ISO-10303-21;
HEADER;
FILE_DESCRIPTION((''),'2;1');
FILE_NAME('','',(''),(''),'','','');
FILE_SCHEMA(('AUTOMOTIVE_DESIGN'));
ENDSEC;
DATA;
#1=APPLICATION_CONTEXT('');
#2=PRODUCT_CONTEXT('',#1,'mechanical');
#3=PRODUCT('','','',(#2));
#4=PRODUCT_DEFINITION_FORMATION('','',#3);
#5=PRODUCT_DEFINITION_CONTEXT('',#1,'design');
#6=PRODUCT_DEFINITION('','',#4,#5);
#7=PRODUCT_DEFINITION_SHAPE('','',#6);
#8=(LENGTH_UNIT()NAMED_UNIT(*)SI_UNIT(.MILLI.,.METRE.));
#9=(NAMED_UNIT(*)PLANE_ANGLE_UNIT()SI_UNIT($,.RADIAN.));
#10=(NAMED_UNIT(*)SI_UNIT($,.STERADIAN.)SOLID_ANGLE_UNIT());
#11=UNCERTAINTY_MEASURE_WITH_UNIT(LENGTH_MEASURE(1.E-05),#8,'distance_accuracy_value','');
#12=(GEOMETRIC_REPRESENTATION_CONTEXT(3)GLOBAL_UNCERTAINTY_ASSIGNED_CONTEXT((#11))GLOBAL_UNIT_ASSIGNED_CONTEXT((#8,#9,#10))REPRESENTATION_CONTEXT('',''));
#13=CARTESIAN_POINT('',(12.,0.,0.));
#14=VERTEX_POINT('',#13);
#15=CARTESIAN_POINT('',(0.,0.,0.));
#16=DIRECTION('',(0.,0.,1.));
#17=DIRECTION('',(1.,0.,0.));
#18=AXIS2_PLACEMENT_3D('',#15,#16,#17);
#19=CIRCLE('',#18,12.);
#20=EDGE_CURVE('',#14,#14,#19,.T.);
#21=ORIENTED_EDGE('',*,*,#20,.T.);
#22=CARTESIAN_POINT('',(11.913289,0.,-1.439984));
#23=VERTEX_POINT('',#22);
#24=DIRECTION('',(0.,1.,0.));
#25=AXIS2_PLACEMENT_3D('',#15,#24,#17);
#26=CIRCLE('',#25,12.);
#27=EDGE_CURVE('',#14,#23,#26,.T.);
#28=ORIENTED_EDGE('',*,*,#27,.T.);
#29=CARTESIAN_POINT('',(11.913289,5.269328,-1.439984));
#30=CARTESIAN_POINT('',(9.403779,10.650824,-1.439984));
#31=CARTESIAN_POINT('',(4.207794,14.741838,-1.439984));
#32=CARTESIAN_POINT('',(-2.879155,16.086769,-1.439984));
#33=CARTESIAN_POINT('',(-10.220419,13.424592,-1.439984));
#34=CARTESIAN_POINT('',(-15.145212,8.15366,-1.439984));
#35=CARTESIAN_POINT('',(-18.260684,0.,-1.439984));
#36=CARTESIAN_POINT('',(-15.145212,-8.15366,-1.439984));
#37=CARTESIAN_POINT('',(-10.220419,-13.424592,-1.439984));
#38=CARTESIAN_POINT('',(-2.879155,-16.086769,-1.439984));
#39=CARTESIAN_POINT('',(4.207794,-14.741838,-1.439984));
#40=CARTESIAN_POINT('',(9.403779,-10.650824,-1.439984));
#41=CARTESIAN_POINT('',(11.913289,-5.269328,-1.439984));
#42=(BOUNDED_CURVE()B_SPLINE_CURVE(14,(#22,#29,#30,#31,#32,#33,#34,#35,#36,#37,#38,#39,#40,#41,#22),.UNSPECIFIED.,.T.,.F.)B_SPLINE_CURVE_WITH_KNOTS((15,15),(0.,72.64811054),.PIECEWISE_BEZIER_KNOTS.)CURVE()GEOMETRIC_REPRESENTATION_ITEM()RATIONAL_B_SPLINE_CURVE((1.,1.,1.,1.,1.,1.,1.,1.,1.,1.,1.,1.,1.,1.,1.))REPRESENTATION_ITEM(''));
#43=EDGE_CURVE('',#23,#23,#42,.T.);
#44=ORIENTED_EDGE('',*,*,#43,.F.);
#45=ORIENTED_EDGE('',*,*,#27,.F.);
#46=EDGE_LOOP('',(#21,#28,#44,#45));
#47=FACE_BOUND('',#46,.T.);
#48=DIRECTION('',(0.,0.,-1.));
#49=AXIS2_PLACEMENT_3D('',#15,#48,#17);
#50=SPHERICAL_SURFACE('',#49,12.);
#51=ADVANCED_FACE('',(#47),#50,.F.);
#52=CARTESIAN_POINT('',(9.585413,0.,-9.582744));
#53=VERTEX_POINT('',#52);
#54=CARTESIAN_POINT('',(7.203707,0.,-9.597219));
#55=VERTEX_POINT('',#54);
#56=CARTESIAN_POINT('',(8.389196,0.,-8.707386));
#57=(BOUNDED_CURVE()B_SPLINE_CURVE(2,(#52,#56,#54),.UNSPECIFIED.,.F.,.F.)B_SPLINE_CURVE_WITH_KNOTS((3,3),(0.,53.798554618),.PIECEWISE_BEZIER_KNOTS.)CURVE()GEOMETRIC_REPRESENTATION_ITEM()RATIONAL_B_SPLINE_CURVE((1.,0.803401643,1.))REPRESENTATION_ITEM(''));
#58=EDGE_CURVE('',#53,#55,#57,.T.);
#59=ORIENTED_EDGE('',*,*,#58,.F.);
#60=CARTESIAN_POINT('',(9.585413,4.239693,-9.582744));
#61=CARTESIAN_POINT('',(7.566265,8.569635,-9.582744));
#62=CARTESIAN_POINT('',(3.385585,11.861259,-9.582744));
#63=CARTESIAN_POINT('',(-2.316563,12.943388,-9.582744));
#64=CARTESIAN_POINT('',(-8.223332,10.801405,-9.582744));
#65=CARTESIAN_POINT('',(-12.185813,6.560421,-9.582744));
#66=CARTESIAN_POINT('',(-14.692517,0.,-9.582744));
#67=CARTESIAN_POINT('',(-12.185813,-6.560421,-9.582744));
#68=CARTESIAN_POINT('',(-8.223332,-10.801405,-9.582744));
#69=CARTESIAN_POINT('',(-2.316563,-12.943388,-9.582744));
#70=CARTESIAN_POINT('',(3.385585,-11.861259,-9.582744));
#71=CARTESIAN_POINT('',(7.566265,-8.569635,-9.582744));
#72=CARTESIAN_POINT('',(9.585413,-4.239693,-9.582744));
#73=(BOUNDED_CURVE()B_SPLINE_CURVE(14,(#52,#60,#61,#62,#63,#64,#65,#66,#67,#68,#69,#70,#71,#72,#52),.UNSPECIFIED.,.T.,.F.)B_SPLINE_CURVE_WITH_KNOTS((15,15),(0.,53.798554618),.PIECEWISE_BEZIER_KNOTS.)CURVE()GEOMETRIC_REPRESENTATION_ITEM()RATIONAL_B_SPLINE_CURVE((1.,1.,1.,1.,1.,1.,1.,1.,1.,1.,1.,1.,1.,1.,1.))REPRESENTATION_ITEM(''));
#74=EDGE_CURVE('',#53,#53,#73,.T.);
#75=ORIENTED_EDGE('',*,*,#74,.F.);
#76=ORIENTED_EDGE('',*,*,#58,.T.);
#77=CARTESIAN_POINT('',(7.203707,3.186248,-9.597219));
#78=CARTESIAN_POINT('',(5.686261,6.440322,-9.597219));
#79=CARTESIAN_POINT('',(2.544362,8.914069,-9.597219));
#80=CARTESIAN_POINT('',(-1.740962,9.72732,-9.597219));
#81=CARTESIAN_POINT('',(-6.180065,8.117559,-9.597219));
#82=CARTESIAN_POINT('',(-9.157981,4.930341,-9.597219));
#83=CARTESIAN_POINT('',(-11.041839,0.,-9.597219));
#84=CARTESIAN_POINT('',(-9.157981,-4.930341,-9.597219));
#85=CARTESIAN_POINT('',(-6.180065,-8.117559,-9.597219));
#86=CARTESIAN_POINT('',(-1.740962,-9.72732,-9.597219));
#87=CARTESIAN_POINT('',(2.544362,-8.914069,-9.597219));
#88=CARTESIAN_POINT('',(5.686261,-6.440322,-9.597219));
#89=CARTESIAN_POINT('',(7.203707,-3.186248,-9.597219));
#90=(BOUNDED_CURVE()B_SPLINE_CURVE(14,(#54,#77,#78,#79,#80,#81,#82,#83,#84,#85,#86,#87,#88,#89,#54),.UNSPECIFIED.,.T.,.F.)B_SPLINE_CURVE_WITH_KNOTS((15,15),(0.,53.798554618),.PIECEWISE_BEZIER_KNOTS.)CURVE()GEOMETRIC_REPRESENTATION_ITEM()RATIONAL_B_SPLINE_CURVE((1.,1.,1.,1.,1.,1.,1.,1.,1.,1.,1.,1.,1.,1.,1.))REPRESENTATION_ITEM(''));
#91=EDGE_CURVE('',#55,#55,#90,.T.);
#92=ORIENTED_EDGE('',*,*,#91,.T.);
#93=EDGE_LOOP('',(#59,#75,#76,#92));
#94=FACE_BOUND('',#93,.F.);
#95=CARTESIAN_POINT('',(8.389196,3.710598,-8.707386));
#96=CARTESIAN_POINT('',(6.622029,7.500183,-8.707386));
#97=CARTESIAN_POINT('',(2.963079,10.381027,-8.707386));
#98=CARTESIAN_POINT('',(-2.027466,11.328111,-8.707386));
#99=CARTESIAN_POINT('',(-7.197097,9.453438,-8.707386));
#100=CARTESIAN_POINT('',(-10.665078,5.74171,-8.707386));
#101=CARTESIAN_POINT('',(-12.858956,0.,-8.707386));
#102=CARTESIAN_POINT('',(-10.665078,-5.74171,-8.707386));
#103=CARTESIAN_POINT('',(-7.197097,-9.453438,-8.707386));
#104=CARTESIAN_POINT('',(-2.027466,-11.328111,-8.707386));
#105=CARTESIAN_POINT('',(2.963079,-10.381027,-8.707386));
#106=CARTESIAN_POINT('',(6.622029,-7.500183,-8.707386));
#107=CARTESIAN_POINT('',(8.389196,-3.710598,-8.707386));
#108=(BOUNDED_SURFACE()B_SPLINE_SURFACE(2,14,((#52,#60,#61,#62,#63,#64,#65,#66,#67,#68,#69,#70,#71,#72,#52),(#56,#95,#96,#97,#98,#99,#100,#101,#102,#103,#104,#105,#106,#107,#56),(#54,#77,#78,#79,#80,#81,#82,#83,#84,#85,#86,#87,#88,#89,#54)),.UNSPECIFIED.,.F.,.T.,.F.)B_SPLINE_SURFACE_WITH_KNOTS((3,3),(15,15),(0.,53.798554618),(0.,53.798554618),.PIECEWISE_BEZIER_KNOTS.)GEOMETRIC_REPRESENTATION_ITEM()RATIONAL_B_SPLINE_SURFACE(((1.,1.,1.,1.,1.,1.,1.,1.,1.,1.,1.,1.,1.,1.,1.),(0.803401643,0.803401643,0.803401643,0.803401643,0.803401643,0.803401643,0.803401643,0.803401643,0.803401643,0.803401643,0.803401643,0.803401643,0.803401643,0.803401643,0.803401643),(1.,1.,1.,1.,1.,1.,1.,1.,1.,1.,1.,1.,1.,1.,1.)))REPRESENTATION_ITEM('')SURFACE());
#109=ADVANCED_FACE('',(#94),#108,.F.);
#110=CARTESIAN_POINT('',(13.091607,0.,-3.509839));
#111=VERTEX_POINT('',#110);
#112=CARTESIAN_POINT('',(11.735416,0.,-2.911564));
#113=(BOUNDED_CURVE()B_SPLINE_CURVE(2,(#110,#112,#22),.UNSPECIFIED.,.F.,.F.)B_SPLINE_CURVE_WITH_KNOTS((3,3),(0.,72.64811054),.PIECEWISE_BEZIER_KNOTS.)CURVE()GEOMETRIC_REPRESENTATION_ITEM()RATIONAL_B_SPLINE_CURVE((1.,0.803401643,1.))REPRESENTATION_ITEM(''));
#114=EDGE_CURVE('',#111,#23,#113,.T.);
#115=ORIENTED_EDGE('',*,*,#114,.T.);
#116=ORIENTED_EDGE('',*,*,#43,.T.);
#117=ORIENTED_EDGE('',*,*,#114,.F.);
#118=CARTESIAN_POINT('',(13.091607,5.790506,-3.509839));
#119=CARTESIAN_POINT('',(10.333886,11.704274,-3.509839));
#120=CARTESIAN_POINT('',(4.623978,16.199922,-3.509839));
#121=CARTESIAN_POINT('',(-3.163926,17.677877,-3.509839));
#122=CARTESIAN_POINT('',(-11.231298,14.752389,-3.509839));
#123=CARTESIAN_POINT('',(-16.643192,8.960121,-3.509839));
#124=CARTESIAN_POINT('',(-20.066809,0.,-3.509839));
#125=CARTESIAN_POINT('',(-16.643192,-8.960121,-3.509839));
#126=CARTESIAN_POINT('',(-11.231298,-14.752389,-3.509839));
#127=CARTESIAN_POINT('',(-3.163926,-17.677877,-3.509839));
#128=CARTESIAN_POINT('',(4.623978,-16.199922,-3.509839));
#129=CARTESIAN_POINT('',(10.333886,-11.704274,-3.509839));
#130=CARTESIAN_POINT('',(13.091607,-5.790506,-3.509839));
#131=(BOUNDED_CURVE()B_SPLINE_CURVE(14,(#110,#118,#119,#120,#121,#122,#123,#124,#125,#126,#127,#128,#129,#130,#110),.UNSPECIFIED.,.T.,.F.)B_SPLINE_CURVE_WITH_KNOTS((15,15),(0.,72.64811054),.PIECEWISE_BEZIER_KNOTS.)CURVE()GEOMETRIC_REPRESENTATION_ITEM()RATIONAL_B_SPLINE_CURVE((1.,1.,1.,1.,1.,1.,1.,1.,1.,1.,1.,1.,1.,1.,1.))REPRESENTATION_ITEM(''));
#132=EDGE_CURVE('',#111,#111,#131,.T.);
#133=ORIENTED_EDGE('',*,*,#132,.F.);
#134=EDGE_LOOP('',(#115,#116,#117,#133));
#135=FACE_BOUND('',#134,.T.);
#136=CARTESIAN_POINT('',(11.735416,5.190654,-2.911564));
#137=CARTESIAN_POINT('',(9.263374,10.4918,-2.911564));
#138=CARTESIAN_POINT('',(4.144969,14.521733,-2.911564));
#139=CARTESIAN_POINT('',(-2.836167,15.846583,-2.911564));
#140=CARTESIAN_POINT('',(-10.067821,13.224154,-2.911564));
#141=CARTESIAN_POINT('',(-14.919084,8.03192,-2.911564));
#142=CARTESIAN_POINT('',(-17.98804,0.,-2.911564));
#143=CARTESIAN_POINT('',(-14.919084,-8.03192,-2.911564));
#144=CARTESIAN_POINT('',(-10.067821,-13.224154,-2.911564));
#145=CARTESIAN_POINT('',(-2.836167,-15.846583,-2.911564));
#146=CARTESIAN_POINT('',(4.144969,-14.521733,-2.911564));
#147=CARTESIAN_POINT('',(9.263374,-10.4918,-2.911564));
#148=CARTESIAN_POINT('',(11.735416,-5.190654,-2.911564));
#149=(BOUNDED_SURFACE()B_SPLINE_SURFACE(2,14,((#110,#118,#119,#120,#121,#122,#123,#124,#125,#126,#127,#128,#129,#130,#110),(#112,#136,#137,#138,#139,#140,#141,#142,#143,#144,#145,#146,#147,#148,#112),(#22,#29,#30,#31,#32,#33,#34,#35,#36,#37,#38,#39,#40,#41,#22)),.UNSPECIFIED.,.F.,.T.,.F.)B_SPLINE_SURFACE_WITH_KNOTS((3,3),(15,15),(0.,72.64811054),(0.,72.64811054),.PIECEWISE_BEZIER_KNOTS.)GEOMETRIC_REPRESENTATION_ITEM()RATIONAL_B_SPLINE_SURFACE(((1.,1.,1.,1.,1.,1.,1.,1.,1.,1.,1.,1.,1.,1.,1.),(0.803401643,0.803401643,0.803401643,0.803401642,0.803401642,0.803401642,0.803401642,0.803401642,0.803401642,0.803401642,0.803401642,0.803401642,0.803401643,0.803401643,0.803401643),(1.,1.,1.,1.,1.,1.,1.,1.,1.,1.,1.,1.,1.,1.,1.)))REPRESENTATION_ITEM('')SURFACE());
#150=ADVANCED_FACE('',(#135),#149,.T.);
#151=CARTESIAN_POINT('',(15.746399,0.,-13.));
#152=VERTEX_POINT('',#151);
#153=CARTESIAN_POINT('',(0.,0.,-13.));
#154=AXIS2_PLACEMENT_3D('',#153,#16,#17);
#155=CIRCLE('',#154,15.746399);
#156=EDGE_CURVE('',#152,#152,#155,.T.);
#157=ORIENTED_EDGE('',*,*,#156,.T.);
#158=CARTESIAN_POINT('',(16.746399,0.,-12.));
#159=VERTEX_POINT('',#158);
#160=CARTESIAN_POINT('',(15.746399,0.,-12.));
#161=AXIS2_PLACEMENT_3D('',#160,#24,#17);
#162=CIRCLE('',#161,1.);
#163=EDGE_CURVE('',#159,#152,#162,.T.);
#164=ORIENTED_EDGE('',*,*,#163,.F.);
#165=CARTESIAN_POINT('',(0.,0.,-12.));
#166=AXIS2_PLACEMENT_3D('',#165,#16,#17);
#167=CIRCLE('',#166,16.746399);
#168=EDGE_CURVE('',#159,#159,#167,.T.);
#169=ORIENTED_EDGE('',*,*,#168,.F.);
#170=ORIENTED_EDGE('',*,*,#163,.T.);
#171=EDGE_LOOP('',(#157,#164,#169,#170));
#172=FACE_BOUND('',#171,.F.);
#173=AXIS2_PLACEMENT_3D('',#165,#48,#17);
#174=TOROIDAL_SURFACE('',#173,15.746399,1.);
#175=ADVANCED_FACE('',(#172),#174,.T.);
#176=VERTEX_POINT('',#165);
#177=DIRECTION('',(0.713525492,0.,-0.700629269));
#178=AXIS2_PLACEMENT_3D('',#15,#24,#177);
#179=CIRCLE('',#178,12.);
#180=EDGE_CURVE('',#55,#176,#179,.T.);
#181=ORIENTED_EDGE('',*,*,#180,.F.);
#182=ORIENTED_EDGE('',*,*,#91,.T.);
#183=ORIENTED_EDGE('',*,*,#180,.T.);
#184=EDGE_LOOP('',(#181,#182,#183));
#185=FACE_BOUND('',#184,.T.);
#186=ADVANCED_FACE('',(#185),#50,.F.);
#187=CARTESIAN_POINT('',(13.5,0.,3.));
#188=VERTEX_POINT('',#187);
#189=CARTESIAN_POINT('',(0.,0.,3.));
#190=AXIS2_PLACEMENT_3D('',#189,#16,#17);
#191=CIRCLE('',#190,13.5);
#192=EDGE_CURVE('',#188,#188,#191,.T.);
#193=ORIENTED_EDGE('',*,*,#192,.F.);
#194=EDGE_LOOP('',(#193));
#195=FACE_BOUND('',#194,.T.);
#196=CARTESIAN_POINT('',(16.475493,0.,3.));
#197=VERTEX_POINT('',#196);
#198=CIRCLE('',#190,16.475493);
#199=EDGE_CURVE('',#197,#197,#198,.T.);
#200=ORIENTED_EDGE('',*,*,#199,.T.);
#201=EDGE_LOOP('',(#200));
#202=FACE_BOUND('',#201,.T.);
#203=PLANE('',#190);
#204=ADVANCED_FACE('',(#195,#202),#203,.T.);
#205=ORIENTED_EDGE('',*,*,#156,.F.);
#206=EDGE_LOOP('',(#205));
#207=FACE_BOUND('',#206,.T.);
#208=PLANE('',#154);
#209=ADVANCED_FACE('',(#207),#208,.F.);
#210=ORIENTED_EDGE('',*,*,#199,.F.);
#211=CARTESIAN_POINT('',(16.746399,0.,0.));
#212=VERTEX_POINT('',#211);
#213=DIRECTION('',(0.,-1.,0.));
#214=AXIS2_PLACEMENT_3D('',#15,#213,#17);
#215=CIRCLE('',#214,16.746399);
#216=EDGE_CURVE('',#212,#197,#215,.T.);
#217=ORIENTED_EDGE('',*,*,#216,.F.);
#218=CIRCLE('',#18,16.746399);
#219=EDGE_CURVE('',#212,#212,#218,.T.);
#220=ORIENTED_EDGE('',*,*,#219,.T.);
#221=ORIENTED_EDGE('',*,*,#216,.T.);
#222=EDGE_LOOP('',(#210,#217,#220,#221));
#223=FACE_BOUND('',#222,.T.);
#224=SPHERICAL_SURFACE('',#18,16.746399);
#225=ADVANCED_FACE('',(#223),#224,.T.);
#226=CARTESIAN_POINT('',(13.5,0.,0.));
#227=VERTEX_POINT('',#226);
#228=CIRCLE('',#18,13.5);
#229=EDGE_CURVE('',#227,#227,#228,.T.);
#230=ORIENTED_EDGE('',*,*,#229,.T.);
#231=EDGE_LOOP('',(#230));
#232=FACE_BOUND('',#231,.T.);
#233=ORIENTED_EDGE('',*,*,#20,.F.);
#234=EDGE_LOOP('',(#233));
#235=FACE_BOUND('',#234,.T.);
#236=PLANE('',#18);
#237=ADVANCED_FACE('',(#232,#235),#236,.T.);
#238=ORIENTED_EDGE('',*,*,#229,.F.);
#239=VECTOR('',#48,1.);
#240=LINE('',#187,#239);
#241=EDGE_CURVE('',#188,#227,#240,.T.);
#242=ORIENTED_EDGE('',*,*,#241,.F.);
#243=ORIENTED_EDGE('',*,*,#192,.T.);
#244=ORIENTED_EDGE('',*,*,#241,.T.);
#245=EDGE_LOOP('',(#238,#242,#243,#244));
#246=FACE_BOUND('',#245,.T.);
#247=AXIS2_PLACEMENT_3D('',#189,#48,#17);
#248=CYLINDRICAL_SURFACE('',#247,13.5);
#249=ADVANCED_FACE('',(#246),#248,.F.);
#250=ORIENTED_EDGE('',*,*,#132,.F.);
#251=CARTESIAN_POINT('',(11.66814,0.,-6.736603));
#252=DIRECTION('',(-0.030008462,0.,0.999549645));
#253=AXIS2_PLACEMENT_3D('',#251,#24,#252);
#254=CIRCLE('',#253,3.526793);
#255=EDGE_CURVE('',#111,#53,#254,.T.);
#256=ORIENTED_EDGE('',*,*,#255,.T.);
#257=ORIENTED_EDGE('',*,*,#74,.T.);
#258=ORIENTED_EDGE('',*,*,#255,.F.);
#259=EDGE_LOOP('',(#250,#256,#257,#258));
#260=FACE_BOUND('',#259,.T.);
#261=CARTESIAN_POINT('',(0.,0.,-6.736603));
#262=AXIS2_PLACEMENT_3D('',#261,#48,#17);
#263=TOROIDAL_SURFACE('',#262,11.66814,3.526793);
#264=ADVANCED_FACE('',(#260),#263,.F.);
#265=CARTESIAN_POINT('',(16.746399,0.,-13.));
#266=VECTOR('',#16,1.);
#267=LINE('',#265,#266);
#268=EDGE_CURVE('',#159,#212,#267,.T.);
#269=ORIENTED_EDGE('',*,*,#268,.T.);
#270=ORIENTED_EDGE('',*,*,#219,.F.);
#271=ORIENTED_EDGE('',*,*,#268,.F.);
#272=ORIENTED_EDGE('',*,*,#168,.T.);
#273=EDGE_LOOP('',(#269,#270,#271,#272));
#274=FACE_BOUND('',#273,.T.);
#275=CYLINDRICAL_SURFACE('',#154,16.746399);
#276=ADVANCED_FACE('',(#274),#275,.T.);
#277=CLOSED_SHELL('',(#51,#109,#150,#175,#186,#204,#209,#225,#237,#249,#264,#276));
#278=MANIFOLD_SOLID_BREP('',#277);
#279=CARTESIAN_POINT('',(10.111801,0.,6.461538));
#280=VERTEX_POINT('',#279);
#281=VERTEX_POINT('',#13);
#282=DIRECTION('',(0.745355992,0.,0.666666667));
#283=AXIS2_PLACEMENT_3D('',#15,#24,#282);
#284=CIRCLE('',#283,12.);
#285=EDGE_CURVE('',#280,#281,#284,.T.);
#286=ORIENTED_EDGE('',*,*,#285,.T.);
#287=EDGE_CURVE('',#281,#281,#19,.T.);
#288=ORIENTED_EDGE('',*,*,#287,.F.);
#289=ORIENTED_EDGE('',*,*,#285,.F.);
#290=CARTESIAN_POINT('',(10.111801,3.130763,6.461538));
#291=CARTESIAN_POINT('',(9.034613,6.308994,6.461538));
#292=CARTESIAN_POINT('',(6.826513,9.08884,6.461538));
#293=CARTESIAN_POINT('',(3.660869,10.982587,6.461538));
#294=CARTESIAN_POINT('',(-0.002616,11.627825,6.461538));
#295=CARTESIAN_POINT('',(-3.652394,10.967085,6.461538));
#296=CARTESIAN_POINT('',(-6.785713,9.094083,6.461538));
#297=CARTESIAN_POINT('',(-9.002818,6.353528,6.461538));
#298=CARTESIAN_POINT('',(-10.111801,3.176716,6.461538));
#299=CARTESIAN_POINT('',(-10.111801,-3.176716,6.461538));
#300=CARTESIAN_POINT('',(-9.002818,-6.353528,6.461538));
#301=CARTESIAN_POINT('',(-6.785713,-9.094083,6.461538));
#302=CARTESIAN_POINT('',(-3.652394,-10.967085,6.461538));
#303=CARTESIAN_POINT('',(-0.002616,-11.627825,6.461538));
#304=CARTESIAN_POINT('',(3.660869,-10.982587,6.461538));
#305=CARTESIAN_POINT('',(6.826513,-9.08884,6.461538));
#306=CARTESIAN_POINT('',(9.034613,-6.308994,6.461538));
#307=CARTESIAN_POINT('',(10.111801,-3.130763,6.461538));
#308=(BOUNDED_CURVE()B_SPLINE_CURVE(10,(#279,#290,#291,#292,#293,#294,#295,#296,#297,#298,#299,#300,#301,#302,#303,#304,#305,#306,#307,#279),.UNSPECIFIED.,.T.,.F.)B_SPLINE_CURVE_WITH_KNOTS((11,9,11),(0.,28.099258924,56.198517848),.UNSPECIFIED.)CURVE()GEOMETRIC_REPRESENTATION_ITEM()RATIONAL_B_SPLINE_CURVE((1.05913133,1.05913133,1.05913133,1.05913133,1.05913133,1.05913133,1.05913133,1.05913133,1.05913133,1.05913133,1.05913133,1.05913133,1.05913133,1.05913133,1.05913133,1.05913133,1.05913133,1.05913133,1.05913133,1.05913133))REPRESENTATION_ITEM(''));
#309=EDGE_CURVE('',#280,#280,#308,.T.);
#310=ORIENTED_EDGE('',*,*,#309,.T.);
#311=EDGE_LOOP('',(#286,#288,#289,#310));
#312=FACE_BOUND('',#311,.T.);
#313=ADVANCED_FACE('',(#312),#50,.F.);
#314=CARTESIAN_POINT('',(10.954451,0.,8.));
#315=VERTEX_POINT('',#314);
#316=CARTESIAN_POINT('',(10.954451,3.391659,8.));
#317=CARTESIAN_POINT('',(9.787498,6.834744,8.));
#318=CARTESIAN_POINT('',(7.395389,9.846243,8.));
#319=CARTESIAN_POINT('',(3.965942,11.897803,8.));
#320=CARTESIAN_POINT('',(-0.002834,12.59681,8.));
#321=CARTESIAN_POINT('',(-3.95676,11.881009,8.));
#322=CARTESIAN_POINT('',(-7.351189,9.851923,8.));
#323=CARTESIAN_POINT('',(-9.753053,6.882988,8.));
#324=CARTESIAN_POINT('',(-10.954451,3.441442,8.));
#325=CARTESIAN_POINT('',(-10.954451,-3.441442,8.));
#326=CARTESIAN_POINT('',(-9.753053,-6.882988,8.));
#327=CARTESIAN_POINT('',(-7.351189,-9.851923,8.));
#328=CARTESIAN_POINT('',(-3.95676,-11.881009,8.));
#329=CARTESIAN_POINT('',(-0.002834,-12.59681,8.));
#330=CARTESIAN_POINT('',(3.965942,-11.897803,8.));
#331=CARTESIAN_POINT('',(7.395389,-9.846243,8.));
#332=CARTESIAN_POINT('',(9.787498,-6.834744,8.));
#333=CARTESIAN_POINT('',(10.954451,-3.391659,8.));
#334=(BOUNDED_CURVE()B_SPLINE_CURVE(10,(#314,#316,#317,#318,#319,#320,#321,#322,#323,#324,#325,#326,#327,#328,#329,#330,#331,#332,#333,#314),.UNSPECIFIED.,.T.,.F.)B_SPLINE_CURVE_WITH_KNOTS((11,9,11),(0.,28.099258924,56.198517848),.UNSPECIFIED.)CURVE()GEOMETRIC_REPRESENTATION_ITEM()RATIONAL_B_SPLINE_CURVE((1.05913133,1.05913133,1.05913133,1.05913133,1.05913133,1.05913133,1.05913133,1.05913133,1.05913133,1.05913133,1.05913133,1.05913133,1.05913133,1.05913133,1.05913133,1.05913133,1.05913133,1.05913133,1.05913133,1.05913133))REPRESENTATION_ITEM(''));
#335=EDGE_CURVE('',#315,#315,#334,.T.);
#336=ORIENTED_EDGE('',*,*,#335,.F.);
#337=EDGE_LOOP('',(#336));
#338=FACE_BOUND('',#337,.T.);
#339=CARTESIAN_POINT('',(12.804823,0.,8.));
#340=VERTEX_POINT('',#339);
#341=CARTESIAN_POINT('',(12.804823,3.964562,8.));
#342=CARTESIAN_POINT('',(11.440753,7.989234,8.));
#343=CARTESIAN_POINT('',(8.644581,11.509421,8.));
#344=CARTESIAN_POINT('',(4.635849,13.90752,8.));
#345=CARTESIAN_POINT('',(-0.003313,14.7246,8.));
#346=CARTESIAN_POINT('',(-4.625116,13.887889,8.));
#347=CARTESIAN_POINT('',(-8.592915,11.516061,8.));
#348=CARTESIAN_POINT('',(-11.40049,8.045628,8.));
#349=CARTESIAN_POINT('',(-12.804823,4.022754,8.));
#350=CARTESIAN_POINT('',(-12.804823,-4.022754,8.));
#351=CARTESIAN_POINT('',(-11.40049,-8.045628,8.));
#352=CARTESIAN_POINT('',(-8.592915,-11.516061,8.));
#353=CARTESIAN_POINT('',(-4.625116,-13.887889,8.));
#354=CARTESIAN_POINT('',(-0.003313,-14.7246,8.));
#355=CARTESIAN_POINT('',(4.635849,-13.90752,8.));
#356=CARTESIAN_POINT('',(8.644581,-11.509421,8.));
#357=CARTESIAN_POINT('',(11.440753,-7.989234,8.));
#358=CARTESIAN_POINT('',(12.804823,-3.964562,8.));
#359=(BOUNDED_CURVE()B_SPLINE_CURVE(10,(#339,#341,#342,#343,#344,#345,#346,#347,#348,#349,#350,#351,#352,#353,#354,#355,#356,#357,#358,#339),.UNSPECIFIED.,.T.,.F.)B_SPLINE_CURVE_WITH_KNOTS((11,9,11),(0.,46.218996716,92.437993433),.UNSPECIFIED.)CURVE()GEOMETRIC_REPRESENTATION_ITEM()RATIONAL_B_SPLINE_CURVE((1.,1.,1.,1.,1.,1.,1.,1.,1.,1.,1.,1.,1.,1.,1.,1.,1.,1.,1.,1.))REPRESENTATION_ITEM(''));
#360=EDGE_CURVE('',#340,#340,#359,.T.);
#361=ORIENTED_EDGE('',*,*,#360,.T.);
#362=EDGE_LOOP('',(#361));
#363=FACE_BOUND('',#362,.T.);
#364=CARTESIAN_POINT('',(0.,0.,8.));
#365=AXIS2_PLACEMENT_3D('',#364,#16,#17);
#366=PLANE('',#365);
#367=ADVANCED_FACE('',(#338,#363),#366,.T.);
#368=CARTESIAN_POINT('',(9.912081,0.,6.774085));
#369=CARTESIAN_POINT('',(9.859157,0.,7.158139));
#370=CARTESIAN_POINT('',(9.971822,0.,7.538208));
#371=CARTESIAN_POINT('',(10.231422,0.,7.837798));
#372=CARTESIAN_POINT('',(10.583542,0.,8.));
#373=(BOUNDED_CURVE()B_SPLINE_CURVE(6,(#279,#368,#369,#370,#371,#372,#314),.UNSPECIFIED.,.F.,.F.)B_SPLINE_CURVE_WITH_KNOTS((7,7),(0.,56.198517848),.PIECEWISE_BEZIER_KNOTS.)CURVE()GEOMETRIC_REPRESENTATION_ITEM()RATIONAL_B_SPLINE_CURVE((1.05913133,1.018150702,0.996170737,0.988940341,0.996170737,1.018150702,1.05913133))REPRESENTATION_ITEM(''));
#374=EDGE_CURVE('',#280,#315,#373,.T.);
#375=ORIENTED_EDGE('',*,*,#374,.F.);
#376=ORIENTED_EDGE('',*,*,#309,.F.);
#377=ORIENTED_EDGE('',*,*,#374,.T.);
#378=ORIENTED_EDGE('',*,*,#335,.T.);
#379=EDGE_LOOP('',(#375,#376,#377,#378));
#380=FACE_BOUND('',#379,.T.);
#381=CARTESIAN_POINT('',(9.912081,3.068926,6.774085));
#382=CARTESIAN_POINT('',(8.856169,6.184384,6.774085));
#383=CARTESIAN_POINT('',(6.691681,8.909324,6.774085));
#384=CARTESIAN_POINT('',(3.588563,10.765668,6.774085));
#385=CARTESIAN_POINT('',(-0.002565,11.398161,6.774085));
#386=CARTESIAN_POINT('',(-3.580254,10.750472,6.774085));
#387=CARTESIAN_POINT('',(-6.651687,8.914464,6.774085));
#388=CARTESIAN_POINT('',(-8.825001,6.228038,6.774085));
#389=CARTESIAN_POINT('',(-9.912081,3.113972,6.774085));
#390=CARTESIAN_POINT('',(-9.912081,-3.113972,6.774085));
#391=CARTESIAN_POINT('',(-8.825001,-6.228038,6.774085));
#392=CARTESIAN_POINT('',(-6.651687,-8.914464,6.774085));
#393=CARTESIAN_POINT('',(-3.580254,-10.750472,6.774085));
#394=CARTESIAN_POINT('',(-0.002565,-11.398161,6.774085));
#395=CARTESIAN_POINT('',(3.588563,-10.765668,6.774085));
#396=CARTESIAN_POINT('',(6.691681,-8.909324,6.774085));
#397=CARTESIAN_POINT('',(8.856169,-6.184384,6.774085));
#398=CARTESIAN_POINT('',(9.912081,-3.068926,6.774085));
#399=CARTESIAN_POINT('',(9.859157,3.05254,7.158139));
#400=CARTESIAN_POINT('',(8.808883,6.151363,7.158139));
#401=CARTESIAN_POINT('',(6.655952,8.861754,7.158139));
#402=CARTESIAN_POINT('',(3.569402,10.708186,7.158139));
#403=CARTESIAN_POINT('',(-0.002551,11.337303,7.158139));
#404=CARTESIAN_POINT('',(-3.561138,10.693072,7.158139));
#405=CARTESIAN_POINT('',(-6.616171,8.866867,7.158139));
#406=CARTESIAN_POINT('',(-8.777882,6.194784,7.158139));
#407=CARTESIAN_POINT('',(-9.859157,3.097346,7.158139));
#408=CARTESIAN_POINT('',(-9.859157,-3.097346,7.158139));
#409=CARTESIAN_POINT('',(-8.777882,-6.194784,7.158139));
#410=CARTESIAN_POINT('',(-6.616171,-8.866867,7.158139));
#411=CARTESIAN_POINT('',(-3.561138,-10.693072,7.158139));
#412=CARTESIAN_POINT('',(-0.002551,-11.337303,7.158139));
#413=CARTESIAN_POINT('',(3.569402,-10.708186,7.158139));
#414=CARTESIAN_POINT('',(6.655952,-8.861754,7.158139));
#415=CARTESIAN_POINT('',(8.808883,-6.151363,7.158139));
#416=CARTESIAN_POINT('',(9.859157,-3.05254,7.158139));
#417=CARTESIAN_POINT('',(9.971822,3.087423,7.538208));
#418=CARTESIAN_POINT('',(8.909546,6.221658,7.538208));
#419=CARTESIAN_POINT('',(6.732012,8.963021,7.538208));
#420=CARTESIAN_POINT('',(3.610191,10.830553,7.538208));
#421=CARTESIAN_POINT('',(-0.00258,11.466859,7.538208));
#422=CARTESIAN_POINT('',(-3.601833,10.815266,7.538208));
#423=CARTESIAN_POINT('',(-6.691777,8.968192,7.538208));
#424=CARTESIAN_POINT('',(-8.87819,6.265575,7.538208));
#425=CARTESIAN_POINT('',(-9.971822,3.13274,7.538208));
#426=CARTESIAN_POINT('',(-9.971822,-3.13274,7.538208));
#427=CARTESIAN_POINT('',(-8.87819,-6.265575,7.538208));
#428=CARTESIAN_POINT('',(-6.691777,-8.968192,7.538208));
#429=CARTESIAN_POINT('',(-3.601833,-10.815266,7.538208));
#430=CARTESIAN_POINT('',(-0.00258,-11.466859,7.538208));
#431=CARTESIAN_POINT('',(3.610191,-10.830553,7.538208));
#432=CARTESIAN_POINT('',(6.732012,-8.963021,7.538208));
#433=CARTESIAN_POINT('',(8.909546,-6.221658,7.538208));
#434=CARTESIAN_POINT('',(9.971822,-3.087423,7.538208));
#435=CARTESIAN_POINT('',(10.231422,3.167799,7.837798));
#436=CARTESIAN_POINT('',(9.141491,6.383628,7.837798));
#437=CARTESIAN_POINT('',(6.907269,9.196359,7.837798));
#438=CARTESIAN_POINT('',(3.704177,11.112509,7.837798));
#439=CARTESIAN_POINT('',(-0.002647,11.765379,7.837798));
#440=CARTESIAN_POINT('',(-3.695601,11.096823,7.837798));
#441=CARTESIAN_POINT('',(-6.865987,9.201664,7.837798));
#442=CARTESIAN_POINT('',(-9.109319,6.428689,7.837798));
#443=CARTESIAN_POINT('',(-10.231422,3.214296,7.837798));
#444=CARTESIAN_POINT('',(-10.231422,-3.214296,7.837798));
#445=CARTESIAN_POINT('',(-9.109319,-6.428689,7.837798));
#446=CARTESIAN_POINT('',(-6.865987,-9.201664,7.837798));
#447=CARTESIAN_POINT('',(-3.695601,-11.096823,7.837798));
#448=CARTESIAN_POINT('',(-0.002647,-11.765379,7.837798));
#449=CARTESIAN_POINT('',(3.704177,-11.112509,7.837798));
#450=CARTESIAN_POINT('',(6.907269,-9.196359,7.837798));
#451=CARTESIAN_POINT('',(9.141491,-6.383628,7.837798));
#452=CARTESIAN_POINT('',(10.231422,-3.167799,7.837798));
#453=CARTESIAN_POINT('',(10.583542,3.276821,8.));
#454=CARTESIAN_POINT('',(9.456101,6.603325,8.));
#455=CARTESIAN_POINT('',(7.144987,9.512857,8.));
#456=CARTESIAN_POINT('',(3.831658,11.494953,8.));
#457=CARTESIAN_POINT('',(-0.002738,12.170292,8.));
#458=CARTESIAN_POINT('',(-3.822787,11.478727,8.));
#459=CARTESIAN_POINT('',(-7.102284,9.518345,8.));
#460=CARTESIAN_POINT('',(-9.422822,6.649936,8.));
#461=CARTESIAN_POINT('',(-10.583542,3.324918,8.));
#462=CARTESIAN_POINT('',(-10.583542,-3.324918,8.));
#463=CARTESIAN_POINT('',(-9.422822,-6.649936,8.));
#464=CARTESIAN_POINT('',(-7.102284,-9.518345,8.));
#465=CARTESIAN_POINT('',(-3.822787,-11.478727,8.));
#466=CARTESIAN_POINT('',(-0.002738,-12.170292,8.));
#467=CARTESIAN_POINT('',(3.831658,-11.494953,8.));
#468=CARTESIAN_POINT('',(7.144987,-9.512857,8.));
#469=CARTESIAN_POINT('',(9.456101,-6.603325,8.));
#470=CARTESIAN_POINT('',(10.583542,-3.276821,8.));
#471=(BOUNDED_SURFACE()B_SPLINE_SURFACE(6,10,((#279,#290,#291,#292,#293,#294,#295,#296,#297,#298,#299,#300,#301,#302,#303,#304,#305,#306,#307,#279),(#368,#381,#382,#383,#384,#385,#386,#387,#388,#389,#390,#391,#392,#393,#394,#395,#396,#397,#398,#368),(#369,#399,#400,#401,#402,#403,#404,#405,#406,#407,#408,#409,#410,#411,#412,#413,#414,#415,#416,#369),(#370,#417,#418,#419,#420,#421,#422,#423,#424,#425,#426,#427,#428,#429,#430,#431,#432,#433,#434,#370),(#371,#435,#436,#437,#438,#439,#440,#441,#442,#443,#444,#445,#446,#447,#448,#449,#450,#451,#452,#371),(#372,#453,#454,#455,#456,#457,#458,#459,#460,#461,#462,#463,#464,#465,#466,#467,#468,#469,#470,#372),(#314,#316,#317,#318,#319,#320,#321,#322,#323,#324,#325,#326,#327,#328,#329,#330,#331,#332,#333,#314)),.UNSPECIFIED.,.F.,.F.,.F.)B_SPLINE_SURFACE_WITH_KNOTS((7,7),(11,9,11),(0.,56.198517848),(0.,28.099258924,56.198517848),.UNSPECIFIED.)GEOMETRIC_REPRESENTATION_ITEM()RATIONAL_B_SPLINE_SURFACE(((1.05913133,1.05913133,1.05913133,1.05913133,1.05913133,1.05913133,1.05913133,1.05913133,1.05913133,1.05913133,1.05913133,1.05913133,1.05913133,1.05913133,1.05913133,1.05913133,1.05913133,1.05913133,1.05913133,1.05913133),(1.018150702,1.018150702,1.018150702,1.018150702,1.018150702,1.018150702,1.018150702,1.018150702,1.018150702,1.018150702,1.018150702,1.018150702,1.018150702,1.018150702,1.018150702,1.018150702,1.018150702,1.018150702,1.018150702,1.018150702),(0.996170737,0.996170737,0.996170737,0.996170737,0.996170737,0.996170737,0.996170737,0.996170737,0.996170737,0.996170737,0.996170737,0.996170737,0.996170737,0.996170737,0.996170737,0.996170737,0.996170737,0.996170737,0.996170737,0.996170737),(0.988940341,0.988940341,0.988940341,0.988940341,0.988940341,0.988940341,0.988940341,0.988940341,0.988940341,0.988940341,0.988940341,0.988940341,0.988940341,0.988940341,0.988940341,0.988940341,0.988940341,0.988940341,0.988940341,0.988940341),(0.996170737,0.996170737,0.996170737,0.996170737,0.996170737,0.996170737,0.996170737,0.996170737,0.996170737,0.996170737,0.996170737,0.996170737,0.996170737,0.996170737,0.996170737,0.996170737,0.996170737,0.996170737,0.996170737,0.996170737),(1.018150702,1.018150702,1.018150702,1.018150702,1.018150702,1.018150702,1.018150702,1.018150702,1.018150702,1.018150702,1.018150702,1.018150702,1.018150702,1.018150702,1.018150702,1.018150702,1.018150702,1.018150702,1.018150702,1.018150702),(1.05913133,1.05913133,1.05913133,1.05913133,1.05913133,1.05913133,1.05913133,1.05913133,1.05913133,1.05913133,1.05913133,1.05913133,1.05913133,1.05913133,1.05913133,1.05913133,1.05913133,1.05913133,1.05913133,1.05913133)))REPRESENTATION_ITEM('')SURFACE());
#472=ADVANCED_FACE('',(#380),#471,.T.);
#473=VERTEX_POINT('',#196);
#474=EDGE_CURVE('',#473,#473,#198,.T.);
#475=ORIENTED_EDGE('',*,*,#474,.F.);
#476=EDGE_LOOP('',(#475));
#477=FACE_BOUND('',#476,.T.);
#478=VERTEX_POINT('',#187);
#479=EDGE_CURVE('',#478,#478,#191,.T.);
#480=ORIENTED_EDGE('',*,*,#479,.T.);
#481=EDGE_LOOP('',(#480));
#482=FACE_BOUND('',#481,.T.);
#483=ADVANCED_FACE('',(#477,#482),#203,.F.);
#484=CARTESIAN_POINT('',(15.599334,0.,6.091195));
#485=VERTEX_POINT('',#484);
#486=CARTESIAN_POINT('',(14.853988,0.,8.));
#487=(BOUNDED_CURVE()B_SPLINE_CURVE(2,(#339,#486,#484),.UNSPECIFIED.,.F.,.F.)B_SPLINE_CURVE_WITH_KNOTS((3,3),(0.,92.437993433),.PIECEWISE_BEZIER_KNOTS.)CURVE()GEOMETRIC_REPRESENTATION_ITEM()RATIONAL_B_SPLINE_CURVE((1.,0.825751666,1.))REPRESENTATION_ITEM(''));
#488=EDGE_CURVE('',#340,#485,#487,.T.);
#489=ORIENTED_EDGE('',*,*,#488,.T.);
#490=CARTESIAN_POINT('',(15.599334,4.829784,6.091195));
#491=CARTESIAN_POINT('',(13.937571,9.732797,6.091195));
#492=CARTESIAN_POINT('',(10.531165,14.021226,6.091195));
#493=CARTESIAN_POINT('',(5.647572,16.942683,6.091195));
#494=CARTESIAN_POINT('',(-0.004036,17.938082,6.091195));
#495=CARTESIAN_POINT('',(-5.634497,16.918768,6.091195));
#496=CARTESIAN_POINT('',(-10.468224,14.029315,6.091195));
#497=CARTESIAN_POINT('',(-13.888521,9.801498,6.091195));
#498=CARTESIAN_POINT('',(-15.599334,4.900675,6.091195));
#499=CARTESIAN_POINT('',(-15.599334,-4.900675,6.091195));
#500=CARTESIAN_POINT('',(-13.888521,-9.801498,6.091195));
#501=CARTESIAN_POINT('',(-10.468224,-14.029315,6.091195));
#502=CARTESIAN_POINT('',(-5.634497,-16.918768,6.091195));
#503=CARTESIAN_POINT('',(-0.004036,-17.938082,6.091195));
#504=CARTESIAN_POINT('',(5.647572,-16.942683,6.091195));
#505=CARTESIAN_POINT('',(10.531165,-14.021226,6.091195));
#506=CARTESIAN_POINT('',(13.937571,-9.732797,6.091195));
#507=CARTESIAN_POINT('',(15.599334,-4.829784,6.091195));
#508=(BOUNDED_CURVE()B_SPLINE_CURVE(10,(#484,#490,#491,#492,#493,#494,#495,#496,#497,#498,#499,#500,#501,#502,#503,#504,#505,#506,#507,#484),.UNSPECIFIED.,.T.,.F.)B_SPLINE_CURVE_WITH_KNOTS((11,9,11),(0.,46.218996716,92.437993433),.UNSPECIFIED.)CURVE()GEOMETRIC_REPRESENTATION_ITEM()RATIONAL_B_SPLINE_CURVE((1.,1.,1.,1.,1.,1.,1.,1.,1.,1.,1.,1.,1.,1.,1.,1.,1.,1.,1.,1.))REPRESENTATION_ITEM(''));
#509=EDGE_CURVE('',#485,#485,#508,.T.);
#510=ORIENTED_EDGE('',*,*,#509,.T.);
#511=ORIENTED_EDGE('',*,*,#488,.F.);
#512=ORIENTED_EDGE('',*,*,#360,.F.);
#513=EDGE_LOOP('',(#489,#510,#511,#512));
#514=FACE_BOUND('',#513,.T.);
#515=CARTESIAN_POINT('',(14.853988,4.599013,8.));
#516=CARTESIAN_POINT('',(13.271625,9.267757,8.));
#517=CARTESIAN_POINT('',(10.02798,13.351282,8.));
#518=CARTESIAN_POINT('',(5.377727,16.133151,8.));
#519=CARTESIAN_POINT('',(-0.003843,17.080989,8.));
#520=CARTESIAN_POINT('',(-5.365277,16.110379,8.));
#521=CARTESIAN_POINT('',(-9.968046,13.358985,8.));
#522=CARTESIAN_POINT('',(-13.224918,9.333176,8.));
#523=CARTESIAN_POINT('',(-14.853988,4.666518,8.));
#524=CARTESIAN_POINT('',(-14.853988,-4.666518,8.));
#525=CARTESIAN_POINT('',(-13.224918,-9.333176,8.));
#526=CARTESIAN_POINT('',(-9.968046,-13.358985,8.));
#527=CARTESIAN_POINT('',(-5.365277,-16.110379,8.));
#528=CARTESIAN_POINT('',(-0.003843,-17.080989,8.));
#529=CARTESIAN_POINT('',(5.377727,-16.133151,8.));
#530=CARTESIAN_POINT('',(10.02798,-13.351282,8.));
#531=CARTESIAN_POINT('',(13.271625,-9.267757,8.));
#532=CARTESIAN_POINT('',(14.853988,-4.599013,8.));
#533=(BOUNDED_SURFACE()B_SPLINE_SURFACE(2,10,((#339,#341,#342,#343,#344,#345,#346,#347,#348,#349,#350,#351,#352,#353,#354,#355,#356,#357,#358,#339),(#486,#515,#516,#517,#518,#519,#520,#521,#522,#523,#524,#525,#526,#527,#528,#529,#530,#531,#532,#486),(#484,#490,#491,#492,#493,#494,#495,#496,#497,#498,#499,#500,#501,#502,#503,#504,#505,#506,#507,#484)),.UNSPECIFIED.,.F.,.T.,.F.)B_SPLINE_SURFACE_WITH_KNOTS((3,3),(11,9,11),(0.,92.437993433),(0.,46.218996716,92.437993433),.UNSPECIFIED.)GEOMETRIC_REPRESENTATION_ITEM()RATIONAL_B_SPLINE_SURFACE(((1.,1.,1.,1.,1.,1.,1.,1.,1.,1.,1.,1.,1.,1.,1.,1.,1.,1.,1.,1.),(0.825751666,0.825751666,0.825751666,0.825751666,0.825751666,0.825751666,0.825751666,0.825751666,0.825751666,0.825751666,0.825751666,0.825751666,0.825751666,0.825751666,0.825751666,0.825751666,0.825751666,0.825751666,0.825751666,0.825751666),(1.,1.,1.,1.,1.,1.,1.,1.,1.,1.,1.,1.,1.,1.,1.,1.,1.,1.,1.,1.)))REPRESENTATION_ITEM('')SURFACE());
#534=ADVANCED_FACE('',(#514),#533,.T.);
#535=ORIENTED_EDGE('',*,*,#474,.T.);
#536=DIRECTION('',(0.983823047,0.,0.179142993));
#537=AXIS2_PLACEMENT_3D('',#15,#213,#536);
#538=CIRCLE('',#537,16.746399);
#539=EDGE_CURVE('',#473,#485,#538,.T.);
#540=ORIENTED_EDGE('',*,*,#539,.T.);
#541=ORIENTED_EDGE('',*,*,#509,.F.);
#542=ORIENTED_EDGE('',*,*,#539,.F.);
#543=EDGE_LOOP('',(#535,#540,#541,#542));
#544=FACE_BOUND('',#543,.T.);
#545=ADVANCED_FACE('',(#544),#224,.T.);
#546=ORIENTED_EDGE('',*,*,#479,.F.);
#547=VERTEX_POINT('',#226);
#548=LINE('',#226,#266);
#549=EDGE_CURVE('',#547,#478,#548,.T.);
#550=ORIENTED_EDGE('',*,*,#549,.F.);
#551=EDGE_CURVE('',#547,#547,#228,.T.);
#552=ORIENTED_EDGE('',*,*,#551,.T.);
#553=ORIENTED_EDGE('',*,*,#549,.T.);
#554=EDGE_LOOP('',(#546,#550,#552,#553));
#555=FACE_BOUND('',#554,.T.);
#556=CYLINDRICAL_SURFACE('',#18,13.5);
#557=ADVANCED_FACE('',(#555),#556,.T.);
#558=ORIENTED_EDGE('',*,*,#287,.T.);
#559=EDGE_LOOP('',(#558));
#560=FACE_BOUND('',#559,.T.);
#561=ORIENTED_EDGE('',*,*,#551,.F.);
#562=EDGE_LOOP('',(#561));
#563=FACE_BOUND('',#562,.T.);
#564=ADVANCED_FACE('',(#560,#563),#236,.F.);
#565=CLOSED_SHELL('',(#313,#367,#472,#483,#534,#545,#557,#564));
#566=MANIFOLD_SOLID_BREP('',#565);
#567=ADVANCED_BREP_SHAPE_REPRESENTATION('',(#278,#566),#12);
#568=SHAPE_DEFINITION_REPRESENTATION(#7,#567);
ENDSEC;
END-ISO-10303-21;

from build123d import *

# Parameters (mm, degrees)
F2_R   = 2
F5_R   = 1
F5_2_R = 1
F6_R   = 3


with BuildPart() as f1:
    # F0 (on Front) → F1 (revolve)
    with BuildSketch(Plane.XZ):
        with BuildLine():
            ThreePointArc((11.5623058987, -3.211398808), (14.7224318643, -8.5), (8.5623058987, -8.4075512307))
            ThreePointArc((8.5623058987, -8.4075512307), (4.6427031583, -11.0655007742), (0, -12))
            Line((0, -12), (0, -13))
            Line((0, -13), (16.7463987921, -13))
            Line((16.7463987921, -13), (16.7463987921, 0))
            ThreePointArc((16.7463987921, 0), (16.6785348586, 1.5061034078), (16.4754930884, 3))
            Line((16.4754930884, 3), (13.5, 3))
            Line((13.5, 3), (13.5, 0))
            Line((13.5, 0), (12, 0))
            ThreePointArc((12, 0), (11.8900729768, -1.6205445404), (11.5623058987, -3.211398808))
        make_face()
    revolve(axis=Axis((0, 0, -1.5362007543), (0, 0, 1)))

    # F2
    f2_edges = [f1.edges().sort_by_distance(p)[0] for p in [
        (-8.562306, 0, -8.407551),
        (-11.562306, 0, -3.211399),
    ]]
    fillet(f2_edges, radius=F2_R)

    # F5
    f5_edges = [f1.edges().sort_by_distance(p)[0] for p in [
        (-16.746399, 0, -13),
    ]]
    fillet(f5_edges, radius=F5_R)


with BuildPart() as f4:
    # F3 (on Front) → F4 (revolve)
    with BuildSketch(Plane.XZ):
        with BuildLine():
            ThreePointArc((8.94427191, 8), (11.2100683076, 4.2818650773), (12, 0))
            Line((12, 0), (13.5, 0))
            Line((13.5, 0), (13.5, 3))
            Line((13.5, 3), (16.4754930884, 3))
            ThreePointArc((16.4754930884, 3), (15.7928579879, 5.5702342032), (14.7119635843, 8))
            Line((14.7119635843, 8), (8.94427191, 8))
        make_face()
    revolve(axis=Axis((0, 0, -1.5362007543), (0, 0, 1)))

    # F5#2
    f5_2_edges = [f4.edges().sort_by_distance(p)[0] for p in [
        (-8.944272, 0, 8),
    ]]
    fillet(f5_2_edges, radius=F5_2_R)

    # F6
    f6_edges = [f4.edges().sort_by_distance(p)[0] for p in [
        (-14.711964, 0, 8),
    ]]
    fillet(f6_edges, radius=F6_R)


solid = Compound([f1.part, f4.part])
